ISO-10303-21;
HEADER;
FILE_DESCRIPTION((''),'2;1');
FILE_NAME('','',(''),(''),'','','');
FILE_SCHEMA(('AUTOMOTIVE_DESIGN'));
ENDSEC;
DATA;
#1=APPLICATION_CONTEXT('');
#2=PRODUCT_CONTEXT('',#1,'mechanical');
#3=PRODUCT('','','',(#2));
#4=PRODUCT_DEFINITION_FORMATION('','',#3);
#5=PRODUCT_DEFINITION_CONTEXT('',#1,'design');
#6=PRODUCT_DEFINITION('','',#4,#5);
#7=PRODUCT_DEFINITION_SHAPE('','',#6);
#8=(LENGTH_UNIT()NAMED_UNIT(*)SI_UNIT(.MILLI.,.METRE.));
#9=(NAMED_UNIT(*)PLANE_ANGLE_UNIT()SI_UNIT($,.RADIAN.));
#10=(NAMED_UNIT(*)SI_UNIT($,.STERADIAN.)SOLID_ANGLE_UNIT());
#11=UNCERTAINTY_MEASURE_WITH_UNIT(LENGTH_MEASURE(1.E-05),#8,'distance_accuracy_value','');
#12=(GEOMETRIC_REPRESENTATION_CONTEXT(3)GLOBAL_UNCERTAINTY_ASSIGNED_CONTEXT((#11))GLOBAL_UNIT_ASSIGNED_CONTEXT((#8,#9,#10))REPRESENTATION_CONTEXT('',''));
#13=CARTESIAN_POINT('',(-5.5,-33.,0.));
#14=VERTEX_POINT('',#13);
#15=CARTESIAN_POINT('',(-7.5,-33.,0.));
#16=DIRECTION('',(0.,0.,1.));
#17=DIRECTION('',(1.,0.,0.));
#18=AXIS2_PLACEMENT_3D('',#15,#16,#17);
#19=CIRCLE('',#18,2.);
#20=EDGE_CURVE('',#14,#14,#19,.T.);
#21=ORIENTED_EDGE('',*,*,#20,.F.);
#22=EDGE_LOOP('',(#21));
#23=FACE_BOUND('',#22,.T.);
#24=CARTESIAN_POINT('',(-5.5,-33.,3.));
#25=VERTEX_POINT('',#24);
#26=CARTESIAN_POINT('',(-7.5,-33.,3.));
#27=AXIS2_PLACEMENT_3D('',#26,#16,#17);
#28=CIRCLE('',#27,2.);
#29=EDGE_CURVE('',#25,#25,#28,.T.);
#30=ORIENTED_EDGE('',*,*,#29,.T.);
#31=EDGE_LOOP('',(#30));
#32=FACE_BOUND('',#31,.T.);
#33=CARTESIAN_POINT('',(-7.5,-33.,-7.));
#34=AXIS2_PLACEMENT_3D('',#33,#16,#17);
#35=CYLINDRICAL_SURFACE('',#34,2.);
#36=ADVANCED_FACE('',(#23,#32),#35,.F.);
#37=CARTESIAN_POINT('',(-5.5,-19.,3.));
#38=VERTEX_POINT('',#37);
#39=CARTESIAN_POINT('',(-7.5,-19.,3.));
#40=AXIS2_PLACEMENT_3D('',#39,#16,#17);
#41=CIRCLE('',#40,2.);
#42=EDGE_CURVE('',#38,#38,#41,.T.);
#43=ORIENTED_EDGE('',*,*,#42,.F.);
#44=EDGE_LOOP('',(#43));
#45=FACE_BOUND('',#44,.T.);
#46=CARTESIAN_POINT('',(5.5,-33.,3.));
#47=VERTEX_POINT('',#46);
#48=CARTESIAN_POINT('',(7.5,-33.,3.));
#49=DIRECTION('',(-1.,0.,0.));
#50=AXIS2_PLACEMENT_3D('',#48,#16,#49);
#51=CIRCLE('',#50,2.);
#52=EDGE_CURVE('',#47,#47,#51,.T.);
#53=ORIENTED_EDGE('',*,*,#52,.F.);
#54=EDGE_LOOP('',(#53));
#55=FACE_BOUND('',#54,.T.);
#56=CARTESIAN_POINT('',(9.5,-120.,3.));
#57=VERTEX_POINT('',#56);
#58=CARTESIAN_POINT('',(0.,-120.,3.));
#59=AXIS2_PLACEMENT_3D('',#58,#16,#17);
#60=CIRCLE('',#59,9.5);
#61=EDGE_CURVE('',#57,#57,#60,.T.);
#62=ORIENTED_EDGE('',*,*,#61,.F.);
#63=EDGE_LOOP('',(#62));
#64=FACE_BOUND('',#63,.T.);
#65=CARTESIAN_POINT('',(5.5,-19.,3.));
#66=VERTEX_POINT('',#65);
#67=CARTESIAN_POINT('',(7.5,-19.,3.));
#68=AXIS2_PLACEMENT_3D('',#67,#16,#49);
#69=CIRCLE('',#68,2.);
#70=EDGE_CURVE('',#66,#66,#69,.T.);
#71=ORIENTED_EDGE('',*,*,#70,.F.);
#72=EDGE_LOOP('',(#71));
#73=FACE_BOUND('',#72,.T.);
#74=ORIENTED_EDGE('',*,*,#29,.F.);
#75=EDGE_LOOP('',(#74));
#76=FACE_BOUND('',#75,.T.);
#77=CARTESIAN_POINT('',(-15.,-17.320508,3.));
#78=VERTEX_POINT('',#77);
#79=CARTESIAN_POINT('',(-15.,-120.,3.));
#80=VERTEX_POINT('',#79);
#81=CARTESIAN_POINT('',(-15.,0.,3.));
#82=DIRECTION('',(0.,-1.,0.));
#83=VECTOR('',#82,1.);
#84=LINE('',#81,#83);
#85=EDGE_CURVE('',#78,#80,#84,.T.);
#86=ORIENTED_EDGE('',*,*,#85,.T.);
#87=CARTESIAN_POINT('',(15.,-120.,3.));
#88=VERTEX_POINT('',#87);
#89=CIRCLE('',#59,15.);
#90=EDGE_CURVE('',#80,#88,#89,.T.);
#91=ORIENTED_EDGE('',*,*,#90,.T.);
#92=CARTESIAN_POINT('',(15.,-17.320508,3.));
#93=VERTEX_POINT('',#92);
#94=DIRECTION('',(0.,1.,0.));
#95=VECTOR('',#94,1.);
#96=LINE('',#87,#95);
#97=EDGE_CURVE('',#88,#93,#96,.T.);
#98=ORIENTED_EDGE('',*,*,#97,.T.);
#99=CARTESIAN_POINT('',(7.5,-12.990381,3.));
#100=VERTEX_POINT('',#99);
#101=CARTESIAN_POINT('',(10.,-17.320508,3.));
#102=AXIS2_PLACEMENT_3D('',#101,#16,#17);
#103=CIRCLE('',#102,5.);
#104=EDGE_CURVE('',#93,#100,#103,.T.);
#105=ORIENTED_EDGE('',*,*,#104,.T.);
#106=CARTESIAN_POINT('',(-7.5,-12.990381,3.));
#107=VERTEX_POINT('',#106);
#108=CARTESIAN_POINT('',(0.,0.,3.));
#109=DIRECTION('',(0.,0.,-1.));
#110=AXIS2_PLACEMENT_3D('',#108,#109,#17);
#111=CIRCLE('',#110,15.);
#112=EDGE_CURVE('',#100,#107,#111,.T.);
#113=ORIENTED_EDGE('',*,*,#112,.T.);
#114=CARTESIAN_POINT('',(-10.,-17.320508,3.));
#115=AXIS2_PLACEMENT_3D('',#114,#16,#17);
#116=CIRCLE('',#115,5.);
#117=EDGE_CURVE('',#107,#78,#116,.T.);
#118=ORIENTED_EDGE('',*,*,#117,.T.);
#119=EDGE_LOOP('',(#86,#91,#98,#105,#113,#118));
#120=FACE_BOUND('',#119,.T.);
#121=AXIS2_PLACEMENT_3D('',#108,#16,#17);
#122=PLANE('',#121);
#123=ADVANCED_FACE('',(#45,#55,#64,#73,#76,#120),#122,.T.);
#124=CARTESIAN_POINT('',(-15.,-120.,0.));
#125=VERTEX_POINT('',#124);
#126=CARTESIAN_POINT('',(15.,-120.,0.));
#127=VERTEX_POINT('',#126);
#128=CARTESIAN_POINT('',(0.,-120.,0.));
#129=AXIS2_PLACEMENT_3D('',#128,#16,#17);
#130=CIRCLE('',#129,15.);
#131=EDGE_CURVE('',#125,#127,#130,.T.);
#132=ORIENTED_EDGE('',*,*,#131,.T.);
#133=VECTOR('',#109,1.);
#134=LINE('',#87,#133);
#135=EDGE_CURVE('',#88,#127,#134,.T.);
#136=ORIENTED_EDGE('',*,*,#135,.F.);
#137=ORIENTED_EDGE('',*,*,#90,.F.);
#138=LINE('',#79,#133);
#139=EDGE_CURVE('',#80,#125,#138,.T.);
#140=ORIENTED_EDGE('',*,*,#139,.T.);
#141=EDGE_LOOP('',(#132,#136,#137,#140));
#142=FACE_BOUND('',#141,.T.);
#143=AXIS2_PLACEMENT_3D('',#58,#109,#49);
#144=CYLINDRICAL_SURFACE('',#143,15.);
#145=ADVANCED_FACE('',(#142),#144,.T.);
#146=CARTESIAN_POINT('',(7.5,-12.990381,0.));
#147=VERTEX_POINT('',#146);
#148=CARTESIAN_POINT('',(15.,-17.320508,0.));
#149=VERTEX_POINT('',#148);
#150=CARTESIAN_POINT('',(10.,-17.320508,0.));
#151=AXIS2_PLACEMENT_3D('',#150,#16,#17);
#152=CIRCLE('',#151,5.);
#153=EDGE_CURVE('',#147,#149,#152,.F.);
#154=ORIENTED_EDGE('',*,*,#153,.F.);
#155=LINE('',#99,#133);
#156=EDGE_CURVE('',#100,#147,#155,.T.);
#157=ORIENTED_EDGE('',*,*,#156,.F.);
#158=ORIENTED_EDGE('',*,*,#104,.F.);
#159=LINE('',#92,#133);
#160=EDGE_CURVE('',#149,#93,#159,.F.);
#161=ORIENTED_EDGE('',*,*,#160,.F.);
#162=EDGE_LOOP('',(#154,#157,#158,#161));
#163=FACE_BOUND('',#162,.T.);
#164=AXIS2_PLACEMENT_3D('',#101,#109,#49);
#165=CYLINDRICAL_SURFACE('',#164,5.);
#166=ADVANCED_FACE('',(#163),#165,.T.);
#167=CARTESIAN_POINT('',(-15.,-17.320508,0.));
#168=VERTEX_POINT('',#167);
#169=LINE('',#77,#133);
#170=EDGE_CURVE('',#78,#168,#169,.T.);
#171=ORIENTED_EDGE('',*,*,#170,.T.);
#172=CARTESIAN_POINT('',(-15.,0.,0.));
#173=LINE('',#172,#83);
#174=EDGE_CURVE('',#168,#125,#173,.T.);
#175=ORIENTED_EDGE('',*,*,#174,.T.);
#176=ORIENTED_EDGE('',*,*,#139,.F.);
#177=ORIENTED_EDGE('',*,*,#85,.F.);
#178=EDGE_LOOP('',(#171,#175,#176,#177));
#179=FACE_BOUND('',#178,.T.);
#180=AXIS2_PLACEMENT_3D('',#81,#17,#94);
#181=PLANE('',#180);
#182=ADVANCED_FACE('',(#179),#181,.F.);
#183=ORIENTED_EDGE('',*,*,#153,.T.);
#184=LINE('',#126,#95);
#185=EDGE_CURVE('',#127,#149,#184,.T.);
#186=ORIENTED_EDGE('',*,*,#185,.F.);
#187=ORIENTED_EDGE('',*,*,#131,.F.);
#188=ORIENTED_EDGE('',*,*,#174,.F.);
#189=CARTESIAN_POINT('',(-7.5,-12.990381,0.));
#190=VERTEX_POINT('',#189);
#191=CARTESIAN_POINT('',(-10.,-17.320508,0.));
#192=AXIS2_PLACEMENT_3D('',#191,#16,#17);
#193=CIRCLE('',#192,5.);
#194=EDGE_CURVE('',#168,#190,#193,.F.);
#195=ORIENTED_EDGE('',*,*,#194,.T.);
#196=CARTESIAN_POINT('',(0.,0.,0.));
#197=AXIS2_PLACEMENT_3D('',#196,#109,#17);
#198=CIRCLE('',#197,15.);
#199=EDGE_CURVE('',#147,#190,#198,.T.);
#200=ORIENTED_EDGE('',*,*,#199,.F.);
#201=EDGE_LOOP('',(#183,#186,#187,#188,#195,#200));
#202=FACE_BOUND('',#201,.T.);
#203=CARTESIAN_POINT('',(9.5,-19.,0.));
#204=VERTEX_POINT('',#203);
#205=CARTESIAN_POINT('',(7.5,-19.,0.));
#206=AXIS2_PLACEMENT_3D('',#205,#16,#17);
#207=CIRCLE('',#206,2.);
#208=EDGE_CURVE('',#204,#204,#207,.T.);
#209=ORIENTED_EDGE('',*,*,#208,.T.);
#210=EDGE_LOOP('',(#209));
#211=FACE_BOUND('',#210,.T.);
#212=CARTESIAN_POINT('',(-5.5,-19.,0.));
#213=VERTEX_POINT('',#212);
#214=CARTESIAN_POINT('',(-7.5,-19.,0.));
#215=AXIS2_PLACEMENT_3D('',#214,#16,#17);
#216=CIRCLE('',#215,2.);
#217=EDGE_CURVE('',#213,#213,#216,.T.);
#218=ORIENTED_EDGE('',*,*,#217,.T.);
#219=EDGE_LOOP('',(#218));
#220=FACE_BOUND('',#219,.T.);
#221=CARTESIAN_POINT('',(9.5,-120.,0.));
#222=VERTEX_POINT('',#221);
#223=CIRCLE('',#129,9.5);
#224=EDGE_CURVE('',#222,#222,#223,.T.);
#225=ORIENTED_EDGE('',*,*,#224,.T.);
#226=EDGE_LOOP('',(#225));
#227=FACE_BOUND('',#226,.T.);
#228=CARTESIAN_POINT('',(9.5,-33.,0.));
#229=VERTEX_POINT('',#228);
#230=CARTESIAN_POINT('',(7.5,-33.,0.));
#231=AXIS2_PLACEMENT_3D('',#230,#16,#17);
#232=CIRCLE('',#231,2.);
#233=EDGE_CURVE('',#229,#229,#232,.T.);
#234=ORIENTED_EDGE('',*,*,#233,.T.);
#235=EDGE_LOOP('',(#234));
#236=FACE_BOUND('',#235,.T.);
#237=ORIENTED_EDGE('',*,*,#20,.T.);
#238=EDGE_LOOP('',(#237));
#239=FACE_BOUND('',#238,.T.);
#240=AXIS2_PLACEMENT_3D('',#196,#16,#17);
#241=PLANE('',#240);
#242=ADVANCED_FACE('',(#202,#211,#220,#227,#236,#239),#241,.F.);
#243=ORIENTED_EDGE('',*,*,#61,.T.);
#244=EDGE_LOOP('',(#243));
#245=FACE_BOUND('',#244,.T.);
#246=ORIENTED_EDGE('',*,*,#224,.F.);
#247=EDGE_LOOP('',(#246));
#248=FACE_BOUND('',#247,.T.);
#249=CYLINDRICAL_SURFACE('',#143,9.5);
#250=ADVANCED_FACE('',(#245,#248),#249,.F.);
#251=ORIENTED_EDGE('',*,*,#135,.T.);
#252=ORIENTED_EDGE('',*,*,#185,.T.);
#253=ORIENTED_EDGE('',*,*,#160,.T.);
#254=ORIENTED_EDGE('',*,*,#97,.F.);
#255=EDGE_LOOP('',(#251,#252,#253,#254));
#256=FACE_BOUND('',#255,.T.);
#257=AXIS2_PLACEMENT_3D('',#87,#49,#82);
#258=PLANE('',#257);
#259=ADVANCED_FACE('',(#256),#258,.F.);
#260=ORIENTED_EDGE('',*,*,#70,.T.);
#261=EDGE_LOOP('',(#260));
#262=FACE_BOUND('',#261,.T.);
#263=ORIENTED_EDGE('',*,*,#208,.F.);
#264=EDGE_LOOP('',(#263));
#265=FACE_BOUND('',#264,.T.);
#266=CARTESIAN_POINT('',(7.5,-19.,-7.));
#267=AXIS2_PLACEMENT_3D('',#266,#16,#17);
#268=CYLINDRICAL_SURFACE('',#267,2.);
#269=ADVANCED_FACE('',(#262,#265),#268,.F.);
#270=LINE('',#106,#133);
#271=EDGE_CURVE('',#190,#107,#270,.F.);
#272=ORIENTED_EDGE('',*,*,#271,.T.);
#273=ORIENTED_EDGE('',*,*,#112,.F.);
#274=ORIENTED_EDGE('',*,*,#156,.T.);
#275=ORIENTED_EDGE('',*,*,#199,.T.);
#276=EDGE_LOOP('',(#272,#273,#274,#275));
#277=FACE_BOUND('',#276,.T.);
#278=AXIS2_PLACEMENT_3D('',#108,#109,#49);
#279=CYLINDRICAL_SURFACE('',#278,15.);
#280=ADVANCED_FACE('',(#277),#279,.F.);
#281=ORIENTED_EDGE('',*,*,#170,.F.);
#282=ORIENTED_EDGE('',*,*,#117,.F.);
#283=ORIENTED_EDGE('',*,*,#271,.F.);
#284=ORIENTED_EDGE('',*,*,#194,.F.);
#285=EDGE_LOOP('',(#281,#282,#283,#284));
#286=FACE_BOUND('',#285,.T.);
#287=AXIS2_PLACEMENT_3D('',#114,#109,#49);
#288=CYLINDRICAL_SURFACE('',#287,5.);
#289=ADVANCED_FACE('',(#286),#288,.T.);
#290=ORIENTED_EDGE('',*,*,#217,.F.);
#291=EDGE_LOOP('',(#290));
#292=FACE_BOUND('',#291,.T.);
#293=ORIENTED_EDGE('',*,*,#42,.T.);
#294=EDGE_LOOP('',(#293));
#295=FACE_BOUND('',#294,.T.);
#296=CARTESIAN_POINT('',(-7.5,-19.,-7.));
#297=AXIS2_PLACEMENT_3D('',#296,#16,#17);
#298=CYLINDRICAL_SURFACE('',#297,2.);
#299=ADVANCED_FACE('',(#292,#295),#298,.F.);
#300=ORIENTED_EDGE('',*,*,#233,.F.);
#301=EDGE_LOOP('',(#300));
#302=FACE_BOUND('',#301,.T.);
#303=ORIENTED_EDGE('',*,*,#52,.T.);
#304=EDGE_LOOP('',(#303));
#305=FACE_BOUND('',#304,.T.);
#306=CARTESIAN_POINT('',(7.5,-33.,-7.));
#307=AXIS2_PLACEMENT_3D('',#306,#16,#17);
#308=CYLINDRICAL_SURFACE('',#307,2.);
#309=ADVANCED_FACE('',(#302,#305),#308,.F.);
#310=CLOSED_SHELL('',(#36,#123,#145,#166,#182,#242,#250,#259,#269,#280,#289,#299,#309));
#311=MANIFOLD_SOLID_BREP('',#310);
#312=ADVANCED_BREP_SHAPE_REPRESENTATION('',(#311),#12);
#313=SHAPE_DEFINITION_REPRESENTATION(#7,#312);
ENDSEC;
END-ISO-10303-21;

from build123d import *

# Parameters (mm, degrees)
SKETCH_1_R          = 9.5
EXTRUDE_1_DEPTH     = 3
FILLET_START        = -1
FILLET_2_DEPTH      = 5
SKETCH_2_R          = 2
CUT_EXTRUDE_1_DEPTH = 10


with BuildPart() as part:
    # 草图1 → 凸台-拉伸1 (new body)
    with BuildSketch(Plane.XY):
        with BuildLine():
            Line((-15, 0), (-15, -120))
            ThreePointArc((-15, -120), (0, -135), (15, -120))
            Line((15, -120), (15, 0))
            ThreePointArc((15, 0), (0, -15), (-15, 0))
        make_face()
        with Locations((0, -120)):
            Circle(SKETCH_1_R, mode=Mode.SUBTRACT)
    extrude(amount=EXTRUDE_1_DEPTH)

    # 圆角2: read off the stored shape, not the designer's step
    # 圆角2 outline → 圆角2 (cut)
    with BuildSketch(Plane.XY.offset(FILLET_START)):
        with BuildLine():
            Line((-15, 0), (-15, -17.320508076))
            ThreePointArc((-15, -17.320508076), (-12.5, -12.990381057), (-7.5, -12.990381057))
            ThreePointArc((-7.5, -12.990381057), (-12.990381057, -7.5), (-15, 0))
        make_face()
        with BuildLine():
            ThreePointArc((15, 0), (12.990381057, -7.5), (7.5, -12.990381057))
            ThreePointArc((7.5, -12.990381057), (12.5, -12.990381057), (15, -17.320508076))
            Line((15, -17.320508076), (15, 0))
        make_face()
    extrude(amount=FILLET_2_DEPTH, mode=Mode.SUBTRACT)

    # 草图2 → 切除-拉伸1 (cut)
    with BuildSketch(Plane.XY.offset(3)):
        with Locations((-7.5, -19)):
            Circle(SKETCH_2_R)
        with Locations((-7.5, -33)):
            Circle(SKETCH_2_R)
        with Locations((7.5, -33)):
            Circle(SKETCH_2_R)
        with Locations((7.5, -19)):
            Circle(SKETCH_2_R)
    extrude(amount=-CUT_EXTRUDE_1_DEPTH, mode=Mode.SUBTRACT)


solid = part.part
